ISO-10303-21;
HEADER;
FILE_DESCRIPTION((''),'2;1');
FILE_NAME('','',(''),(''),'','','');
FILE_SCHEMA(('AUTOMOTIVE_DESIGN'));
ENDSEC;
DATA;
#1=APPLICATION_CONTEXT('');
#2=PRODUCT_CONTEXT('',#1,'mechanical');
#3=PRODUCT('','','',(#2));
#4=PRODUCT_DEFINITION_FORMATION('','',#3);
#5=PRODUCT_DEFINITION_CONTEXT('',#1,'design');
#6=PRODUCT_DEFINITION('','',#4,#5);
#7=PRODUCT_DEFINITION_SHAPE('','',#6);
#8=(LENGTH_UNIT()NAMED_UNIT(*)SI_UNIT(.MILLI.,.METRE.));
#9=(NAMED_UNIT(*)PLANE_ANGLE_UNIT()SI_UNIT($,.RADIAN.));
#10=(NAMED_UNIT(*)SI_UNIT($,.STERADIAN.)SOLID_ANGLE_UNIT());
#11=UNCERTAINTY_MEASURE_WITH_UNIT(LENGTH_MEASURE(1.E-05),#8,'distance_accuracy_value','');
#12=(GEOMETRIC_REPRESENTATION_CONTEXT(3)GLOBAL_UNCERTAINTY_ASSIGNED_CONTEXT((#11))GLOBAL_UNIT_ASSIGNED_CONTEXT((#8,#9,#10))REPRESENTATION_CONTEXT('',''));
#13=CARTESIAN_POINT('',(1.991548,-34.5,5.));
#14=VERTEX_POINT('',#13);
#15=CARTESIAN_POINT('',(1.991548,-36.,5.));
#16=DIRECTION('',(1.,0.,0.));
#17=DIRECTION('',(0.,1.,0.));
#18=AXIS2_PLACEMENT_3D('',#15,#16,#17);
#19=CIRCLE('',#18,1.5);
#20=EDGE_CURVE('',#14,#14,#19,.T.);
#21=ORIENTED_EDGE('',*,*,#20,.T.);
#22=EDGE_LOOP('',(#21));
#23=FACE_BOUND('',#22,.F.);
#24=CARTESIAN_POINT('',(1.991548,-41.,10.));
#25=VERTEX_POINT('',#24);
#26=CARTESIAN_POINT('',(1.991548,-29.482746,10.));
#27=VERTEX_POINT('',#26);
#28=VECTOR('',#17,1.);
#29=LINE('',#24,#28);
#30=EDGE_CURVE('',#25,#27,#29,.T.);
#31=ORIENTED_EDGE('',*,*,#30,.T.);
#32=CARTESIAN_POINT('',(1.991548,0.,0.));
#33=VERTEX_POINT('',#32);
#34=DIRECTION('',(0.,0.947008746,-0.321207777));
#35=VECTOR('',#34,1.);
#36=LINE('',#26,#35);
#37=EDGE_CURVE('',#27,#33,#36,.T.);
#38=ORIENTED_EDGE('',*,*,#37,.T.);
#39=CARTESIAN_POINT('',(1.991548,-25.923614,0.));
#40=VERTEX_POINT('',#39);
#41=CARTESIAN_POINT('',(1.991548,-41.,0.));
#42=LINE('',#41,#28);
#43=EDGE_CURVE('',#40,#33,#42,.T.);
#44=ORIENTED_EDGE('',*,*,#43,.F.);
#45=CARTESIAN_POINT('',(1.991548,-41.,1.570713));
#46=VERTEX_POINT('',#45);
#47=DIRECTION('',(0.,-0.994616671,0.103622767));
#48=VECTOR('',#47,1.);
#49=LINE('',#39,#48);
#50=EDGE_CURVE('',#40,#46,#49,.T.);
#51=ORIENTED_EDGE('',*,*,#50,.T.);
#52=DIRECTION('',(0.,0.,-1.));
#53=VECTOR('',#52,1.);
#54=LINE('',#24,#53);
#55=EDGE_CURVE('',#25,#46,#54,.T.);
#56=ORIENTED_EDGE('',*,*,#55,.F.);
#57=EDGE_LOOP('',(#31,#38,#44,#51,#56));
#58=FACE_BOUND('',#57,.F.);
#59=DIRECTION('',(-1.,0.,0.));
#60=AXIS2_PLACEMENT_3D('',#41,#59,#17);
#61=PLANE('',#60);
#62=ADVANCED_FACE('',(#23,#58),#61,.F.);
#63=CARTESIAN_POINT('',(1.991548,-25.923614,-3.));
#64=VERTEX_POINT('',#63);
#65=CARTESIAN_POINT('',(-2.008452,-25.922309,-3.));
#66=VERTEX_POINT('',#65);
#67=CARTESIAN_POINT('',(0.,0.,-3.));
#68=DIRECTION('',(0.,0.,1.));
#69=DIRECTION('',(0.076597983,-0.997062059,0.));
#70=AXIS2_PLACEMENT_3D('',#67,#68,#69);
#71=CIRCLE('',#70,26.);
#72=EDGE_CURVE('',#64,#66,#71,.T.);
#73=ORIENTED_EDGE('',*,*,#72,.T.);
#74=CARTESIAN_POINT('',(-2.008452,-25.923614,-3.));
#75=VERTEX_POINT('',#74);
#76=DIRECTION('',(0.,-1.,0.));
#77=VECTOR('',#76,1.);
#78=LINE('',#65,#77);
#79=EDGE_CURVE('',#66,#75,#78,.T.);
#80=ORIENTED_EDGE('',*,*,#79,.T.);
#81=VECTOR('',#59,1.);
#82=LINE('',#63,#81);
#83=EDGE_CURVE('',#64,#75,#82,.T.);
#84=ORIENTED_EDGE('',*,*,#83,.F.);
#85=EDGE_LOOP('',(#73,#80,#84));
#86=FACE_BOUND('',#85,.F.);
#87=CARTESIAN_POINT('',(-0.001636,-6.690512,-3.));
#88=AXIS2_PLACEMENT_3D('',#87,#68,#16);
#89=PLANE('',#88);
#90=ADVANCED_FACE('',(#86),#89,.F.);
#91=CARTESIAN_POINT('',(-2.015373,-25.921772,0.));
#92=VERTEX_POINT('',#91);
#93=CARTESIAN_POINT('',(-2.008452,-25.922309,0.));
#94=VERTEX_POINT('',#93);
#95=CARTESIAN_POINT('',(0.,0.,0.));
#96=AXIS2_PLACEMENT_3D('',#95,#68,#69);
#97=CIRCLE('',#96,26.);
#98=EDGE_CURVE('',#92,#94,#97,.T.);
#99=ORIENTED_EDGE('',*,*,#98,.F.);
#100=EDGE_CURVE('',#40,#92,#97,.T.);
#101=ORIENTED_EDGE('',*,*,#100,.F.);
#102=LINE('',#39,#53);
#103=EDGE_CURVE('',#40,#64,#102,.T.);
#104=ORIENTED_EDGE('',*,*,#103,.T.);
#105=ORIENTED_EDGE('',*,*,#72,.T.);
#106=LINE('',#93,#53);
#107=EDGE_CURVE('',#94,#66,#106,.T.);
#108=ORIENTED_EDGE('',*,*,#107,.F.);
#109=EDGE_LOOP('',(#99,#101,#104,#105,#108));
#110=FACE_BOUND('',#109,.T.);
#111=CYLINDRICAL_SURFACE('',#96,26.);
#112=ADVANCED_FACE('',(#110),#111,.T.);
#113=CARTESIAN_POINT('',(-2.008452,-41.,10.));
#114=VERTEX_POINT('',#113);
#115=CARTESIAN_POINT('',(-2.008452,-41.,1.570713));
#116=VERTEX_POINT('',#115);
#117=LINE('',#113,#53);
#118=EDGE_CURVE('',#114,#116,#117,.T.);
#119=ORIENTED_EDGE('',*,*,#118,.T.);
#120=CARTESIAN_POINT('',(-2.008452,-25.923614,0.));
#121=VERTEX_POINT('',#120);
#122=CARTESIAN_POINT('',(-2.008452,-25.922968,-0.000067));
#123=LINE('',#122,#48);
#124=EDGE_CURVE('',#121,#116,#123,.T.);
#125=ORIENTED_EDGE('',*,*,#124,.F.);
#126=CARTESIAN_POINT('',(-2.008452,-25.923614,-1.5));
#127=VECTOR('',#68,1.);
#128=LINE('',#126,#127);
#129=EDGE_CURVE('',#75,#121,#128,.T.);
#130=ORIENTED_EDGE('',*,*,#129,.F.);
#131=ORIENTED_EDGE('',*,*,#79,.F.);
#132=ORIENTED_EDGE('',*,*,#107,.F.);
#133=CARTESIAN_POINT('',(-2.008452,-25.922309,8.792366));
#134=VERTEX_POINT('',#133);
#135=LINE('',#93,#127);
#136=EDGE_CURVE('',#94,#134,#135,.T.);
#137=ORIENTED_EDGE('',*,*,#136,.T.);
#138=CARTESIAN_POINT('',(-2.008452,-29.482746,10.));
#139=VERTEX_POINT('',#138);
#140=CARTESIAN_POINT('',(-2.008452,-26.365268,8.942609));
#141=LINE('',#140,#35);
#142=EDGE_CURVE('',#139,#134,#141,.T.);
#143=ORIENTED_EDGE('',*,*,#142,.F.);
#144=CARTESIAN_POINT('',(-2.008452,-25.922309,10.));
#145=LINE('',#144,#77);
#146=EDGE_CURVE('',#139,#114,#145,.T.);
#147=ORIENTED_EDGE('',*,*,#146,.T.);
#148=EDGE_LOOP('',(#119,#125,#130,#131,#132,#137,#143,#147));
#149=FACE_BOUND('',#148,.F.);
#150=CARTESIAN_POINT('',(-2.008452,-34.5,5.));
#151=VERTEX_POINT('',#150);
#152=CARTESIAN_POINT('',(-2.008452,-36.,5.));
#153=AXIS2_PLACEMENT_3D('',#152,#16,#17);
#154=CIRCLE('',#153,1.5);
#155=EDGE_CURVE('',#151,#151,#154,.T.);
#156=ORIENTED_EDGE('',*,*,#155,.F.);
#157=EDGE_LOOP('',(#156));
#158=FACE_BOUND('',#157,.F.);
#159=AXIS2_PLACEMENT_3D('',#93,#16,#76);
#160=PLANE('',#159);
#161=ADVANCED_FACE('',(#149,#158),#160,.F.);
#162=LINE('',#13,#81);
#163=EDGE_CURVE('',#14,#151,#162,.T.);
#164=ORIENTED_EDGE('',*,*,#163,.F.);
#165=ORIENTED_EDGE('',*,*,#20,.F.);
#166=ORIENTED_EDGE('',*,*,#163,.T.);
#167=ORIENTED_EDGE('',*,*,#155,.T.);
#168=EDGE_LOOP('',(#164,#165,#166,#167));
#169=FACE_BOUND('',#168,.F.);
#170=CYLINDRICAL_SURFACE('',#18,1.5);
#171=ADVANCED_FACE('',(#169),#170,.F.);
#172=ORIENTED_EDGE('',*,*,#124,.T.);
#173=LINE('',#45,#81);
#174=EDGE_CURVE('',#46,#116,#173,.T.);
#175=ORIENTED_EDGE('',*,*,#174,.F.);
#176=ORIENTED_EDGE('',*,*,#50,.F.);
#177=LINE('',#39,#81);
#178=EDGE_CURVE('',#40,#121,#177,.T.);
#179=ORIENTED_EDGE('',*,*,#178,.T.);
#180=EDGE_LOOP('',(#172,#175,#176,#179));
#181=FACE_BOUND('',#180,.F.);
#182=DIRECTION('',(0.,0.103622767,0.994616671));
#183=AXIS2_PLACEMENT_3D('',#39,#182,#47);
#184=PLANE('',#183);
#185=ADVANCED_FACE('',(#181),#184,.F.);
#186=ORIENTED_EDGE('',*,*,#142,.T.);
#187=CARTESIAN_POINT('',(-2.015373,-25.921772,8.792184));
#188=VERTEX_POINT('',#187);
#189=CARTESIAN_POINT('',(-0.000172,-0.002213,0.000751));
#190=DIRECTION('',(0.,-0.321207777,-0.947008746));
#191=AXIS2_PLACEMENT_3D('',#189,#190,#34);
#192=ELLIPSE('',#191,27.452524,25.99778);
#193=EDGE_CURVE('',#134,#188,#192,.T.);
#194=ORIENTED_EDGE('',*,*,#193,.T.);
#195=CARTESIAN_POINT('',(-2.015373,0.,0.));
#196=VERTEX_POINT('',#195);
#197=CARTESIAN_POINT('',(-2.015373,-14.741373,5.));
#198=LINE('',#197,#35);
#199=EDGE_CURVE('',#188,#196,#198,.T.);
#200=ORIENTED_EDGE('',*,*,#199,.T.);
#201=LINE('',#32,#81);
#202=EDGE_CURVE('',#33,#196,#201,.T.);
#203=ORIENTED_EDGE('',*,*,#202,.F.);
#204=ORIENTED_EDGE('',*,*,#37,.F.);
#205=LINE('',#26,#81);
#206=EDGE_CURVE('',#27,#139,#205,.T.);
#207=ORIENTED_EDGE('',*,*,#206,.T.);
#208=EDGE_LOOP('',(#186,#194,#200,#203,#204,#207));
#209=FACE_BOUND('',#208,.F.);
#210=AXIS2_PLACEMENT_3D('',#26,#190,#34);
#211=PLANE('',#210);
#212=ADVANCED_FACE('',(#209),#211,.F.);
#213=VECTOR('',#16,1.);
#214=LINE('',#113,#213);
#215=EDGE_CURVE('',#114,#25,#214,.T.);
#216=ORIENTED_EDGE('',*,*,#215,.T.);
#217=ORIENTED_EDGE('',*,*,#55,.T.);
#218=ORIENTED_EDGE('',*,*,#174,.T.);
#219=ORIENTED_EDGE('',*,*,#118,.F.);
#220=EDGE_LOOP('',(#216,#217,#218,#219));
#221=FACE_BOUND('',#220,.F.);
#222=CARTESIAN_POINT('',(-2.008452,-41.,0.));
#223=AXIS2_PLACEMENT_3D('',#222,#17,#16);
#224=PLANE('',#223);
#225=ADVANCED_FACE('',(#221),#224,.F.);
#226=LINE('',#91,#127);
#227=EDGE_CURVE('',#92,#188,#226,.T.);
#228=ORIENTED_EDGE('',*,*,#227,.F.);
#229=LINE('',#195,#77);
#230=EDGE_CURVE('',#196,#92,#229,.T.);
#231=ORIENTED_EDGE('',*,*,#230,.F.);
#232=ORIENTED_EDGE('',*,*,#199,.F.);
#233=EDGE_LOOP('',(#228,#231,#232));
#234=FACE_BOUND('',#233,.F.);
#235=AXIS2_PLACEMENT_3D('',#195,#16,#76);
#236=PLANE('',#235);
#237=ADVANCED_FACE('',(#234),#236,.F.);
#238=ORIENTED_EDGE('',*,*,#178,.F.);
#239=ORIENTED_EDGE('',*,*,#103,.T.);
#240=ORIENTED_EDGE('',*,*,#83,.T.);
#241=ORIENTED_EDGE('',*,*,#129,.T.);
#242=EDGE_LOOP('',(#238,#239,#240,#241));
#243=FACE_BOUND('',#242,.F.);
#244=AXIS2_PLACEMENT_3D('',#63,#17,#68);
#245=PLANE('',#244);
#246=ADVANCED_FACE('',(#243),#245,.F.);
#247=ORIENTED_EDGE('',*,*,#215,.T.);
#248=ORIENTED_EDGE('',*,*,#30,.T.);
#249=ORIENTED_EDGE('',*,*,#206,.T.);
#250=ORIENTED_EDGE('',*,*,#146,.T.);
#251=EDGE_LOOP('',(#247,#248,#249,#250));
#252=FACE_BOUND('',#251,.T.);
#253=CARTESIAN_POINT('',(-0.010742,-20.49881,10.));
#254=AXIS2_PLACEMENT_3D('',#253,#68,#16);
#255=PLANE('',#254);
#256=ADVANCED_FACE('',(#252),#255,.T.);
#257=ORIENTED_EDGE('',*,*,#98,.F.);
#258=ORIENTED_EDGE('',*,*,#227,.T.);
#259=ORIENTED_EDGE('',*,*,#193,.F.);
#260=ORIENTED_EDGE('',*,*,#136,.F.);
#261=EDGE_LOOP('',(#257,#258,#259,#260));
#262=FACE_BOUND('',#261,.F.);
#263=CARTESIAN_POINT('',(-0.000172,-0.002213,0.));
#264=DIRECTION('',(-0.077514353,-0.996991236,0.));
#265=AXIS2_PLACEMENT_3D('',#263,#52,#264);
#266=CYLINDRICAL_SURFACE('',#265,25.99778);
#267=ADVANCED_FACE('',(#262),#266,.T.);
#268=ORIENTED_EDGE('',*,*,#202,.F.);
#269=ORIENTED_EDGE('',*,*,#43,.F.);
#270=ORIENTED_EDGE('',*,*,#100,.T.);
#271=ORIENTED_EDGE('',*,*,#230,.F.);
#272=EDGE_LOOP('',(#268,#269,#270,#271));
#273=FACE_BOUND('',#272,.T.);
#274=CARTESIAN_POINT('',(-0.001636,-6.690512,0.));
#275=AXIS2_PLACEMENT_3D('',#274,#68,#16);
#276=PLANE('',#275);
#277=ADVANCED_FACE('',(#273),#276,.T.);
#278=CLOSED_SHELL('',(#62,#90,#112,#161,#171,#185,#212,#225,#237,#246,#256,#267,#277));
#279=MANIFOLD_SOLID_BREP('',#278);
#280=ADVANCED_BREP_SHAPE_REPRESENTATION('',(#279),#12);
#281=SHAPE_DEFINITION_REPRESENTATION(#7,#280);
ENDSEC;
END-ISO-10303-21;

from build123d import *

# Parameters (mm, degrees)
F1_DEPTH  = 3
F3_DEPTH  = 10
F5_DEPTH  = 25
F6_W      = 4.4599839021
F6_H      = 15.0388356149
F6_W_2    = 4
F7_DEPTH  = 3
F8_R      = 1.5
F9_DEPTH  = 25
F11_DEPTH = 25


with BuildPart() as f1:
    # F0 (on Top) → F1 (new body)
    with BuildSketch(Plane.XY):
        with BuildLine():
            Line((1.9915475706, -41), (1.9915475706, -25.9236135266))
            ThreePointArc((1.9915475706, -25.9236135266), (0.0084775482, 25.9999986179), (-2.0084524294, -25.9223092883))
            Line((-2.0084524294, -25.9223092883), (-2.0084524294, -41))
            Line((-2.0084524294, -41), (1.9915475706, -41))
        make_face()
    extrude(amount=-F1_DEPTH)

    # F2 (on face) → F3 (join)
    with BuildSketch(Plane.XY):
        with BuildLine():
            Line((1.9915475706, 0), (-2.0153727382, 0))
            Line((-2.0153727382, 0), (-2.0153727382, -25.9217721756))
            ThreePointArc((-2.0153727382, -25.9217721756), (-2.0119126018, -25.9220409629), (-2.0084524294, -25.9223092883))
            Line((-2.0084524294, -25.9223092883), (-2.0084524294, -41))
            Line((-2.0084524294, -41), (1.9915475706, -41))
            Line((1.9915475706, -41), (1.9915475706, -25.9236135266))
            Line((1.9915475706, -25.9236135266), (1.9915475706, 0))
        make_face()
    extrude(amount=F3_DEPTH)

    # F4 (on face) → F5 (cut)
    with BuildSketch(Plane.YZ.offset(1.9915475706)):
        Polygon((-29.4827464968, 10), (0, 0), (0, 10), align=None)
    extrude(amount=-F5_DEPTH, mode=Mode.SUBTRACT)

    # F6 (on face) → F7 (cut)
    with BuildSketch(Plane(origin=(0, 0, -3), x_dir=(1, 0, 0), z_dir=(0, 0, -1))):
        with Locations((-0.0513555715, 33.4805821925)):
            Rectangle(F6_W, F6_H)
        with Locations((-0.0084524294, 33.4805821925)):
            Rectangle(F6_W_2, F6_H)
    extrude(amount=-F7_DEPTH, mode=Mode.SUBTRACT)

    # F8 (on face) → F9 (cut)
    with BuildSketch(Plane.YZ.offset(1.9915475706)):
        with Locations((-36, 5)):
            Circle(F8_R)
    extrude(amount=-F9_DEPTH, mode=Mode.SUBTRACT)

    # F10 (on face) → F11 (cut)
    with BuildSketch(Plane.YZ.offset(1.9915475706)):
        Polygon((-25.9236135266, -3), (-25.9236135266, 0), (-41, 1.5707125422), (-41, 0), (-25.9611643851, 0), (-25.9611643851, -3), align=None)
    extrude(amount=-F11_DEPTH, mode=Mode.SUBTRACT)


solid = f1.part
